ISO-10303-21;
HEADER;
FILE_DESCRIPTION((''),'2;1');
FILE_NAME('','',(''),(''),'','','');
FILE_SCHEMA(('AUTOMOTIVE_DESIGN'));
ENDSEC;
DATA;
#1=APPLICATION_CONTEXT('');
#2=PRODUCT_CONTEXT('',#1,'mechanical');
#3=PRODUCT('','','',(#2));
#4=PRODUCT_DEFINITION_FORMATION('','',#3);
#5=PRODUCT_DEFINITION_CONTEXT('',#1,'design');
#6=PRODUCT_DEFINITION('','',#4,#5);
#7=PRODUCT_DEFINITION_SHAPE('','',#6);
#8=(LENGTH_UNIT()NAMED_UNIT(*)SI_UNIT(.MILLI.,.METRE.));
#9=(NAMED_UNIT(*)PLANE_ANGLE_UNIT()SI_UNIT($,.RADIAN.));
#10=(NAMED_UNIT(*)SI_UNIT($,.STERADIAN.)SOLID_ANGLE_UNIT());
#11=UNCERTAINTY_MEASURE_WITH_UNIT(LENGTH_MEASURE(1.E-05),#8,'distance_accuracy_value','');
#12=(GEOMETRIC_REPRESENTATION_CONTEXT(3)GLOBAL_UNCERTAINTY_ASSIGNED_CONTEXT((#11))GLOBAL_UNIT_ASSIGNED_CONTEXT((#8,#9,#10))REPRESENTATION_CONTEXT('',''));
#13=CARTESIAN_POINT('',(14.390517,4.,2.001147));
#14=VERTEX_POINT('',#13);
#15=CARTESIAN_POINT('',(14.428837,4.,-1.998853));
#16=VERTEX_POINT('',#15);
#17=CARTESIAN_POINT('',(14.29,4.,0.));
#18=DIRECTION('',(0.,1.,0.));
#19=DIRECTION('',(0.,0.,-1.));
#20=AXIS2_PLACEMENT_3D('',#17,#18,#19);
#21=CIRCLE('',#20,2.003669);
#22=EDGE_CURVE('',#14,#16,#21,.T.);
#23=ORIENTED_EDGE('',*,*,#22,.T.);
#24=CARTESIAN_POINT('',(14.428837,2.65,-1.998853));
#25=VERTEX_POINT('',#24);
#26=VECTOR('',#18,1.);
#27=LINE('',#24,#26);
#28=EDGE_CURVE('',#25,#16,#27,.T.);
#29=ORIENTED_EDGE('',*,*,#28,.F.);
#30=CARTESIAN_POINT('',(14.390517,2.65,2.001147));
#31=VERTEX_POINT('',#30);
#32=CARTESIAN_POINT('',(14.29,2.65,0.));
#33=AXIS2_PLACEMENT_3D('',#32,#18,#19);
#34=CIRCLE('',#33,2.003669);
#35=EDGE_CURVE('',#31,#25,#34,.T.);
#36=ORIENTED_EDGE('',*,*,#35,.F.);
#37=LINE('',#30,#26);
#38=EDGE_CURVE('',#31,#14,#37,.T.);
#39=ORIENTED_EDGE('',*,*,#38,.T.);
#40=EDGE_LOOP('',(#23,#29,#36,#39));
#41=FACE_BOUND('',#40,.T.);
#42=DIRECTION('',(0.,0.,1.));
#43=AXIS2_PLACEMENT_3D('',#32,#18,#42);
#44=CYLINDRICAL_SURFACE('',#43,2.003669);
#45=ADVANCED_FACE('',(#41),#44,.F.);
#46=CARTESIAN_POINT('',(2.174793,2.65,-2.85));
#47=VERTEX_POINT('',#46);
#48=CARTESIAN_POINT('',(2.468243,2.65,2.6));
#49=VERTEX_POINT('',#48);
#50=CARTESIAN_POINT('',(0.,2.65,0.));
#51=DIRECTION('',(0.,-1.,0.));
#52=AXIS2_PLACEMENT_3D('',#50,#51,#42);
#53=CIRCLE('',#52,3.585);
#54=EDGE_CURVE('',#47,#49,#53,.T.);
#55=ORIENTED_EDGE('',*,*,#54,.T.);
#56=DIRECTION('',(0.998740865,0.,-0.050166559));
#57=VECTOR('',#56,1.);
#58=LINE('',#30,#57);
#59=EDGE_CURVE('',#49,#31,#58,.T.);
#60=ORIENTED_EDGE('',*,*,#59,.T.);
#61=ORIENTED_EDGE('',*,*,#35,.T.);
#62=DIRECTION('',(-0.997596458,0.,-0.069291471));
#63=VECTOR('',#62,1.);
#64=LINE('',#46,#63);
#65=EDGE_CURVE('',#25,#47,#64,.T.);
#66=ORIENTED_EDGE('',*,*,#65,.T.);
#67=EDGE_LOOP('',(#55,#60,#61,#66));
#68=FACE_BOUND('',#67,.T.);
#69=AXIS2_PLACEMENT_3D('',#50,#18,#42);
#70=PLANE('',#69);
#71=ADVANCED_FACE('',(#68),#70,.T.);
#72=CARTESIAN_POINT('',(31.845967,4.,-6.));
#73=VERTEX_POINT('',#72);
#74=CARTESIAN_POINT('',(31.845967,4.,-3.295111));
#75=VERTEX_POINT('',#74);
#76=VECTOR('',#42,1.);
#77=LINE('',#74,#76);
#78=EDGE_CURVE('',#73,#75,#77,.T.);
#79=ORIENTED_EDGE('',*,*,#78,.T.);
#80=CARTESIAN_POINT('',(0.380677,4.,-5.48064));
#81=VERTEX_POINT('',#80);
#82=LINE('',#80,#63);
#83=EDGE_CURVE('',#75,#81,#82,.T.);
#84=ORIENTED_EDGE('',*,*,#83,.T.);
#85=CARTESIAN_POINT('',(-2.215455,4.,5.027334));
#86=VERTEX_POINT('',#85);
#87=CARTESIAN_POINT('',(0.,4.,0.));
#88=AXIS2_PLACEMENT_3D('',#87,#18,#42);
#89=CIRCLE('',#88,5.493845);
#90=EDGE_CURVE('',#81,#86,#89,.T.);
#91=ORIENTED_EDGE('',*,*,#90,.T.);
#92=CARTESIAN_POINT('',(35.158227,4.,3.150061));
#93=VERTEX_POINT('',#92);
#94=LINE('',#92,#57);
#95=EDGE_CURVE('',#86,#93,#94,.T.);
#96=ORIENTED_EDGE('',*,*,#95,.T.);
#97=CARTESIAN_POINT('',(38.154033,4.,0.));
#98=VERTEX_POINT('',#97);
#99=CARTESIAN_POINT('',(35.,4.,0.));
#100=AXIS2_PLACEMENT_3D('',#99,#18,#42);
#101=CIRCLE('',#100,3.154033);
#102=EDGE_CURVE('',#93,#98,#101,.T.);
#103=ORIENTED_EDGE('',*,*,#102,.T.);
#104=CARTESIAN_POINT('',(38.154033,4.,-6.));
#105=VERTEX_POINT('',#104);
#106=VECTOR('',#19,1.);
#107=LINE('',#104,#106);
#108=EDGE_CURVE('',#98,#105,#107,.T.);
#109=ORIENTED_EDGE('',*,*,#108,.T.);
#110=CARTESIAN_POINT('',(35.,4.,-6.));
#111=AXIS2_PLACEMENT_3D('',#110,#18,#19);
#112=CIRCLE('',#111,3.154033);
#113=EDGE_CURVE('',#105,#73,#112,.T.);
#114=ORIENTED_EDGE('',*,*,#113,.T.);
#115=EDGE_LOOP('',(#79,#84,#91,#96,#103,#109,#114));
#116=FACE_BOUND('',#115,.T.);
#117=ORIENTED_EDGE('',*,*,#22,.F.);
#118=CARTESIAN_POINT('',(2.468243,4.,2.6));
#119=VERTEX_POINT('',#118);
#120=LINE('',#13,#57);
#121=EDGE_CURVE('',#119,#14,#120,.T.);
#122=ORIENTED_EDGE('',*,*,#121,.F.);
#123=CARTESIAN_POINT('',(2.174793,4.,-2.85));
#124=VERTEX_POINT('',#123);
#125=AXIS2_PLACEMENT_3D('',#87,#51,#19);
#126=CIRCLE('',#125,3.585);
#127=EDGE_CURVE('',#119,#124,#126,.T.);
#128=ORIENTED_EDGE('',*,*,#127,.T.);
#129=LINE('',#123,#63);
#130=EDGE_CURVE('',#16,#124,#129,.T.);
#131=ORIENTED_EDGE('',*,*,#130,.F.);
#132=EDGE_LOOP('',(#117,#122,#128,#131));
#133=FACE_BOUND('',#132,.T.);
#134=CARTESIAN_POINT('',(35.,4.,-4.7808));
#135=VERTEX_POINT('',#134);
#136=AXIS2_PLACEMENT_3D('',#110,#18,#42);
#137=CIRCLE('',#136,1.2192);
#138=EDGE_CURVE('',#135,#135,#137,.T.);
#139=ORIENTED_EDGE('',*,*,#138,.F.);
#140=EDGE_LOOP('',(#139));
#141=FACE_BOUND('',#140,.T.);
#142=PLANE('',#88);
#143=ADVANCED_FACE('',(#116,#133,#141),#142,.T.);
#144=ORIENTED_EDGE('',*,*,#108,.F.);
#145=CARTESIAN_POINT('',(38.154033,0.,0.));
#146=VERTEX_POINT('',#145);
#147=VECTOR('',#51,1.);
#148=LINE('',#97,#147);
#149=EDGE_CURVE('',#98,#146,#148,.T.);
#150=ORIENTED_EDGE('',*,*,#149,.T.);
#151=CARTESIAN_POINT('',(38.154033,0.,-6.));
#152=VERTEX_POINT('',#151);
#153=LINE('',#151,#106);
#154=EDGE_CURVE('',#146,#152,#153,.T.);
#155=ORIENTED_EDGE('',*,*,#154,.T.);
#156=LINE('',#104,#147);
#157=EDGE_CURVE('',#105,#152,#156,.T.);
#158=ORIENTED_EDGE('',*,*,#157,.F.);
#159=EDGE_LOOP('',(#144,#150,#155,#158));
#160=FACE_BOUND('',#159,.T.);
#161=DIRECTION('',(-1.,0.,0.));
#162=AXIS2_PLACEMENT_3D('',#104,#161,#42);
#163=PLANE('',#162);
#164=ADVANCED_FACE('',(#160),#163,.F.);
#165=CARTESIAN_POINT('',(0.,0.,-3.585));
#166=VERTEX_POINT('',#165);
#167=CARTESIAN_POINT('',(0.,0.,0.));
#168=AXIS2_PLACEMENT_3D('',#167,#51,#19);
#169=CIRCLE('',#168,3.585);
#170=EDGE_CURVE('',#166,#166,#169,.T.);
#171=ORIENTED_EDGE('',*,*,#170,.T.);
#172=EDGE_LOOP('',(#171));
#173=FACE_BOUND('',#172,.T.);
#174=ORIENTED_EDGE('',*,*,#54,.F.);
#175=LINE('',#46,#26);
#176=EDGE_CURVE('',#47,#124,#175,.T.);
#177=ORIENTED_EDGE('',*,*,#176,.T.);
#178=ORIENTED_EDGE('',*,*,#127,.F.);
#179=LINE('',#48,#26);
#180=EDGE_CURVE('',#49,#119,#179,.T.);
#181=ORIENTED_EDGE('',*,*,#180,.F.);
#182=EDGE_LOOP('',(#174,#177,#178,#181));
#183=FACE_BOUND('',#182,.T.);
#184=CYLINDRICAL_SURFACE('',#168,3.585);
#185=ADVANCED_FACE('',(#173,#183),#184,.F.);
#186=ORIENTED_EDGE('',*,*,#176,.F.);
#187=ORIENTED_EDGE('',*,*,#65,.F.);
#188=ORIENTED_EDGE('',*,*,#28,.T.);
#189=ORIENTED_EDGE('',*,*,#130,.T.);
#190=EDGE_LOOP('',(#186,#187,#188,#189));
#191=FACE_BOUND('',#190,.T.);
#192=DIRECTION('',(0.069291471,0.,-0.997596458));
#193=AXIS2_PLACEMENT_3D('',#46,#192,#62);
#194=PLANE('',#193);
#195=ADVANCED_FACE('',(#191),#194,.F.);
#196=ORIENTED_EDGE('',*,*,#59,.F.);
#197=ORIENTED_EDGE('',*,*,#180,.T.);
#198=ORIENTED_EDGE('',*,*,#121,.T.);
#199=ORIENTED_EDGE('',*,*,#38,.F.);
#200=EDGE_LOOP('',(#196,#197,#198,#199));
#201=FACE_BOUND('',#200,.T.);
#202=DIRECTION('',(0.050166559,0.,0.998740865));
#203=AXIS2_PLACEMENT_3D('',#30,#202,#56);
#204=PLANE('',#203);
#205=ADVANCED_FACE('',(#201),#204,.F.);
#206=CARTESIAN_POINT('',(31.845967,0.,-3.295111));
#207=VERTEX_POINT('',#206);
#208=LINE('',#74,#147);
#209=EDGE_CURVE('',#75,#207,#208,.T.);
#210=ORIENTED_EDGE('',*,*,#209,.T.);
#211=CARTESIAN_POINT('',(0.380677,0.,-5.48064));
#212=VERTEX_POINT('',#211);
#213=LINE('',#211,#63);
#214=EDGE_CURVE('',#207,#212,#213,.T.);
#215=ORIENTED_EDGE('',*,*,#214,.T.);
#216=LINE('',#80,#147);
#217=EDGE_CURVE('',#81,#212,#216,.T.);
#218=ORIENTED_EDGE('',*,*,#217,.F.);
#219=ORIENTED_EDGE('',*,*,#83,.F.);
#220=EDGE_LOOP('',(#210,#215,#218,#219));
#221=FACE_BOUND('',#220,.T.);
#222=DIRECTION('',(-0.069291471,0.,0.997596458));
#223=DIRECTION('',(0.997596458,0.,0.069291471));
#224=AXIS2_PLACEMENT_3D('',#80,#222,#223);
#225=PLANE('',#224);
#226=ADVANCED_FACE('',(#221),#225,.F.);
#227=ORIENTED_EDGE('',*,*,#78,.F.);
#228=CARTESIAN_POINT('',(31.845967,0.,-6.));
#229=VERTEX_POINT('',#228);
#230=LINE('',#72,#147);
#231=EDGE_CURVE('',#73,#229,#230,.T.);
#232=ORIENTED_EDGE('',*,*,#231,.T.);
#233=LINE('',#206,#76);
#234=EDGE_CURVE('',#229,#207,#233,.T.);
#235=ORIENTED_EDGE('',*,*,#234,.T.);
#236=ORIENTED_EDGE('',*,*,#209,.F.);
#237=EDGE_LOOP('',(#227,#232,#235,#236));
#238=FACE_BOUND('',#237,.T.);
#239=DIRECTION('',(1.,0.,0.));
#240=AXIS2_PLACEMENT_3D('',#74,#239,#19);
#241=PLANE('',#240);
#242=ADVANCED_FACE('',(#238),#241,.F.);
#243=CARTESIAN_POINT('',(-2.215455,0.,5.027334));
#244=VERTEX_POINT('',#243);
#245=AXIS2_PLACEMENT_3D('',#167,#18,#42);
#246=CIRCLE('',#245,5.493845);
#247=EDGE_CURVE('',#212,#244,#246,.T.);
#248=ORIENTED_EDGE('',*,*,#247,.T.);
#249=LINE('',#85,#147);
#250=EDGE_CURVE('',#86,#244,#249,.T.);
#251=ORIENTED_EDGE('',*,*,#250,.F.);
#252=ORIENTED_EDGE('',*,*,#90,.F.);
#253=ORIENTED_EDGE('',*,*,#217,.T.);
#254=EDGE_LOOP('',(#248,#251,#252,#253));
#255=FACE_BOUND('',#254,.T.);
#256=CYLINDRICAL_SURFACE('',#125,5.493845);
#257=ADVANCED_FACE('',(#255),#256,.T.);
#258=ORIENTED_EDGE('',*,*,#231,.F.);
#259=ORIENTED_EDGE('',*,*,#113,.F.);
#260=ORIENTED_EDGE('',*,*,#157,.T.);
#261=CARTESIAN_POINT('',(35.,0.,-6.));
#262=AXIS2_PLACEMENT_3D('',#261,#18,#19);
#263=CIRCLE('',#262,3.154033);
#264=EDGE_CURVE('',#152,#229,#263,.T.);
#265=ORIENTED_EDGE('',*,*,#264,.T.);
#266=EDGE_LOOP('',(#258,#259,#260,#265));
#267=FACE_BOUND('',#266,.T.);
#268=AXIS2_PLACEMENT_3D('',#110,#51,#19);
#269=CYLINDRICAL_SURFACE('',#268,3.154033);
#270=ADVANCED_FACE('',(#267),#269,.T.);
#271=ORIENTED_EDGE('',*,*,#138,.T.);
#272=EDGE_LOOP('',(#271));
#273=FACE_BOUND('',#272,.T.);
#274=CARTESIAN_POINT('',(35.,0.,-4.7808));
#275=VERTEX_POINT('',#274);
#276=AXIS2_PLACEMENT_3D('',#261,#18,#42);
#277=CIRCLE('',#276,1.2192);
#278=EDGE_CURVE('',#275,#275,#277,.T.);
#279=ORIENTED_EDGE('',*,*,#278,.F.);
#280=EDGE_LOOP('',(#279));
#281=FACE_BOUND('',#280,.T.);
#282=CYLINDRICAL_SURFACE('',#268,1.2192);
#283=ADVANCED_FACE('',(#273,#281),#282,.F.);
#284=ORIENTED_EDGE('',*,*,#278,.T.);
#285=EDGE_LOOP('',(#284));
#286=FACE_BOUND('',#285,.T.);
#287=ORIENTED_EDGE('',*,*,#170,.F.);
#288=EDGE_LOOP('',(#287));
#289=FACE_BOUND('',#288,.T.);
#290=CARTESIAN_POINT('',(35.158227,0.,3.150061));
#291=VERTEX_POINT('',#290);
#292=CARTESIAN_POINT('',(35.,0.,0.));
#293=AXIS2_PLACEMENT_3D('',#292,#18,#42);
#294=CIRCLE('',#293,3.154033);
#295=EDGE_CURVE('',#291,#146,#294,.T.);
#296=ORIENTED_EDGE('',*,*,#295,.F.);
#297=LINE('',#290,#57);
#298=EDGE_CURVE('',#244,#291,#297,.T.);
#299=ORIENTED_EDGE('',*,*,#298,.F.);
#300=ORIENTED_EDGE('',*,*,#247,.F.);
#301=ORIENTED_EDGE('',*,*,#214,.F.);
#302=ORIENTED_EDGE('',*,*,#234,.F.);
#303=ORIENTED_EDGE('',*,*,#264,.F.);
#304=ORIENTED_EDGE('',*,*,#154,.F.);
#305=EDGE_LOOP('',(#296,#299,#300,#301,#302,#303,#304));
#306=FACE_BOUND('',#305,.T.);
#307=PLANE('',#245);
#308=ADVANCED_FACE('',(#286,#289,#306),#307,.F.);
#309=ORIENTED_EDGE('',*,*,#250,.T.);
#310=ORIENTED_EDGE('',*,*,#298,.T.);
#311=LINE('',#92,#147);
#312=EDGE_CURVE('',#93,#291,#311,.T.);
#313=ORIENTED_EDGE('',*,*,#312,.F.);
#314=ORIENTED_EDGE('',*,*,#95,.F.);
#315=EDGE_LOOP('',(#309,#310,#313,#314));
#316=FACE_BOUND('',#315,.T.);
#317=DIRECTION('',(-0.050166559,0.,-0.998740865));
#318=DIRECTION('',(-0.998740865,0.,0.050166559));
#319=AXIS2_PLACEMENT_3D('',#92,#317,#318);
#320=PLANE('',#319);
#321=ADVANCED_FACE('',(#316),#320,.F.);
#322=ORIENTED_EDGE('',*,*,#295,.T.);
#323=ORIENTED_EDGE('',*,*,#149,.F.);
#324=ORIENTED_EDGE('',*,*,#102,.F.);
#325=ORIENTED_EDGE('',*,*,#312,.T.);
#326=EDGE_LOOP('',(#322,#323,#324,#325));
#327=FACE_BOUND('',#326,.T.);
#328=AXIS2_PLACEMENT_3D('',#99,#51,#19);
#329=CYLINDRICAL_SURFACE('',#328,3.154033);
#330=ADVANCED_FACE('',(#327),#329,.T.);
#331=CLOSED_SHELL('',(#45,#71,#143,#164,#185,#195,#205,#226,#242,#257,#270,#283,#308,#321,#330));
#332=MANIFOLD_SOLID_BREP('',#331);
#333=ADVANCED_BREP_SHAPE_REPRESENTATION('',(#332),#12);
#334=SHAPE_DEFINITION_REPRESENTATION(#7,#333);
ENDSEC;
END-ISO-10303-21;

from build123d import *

# Parameters (mm, degrees)
BOSS_EXTRUDE1_START    = -1.35
BOSS_EXTRUDE1_DEPTH    = 1.35
SKETCH4_R              = 1.2192
BOSS_EXTRUDE2_DEPTH    = 4
BODY_DELETE1_OUTLINE_R = 2.45
BODY_DELETE1_DEPTH     = 4


# Read off the part's stored shape, not the designer's step: Body-Delete1
with BuildPart() as part:
    # Sketch2 → Revolve1 (revolve)
    with BuildSketch(Plane.XY, mode=Mode.PRIVATE) as revolve1_sk:
        Polygon((2.45, 0), (2.45, 2.25), (1.2, 2.25), (1.2, 3), (2.45, 3), (2.45, 4), (3.585, 4), (3.585, 0), align=None)
    revolve(revolve1_sk.sketch.rotate(Axis((0, 0, 0), (0, 1, 0)), 90), axis=Axis((0, 0, 0), (0, 1, 0)))

    # Sketch3 → Boss-Extrude1 (add)
    with BuildSketch(Plane(origin=(0, 4, 0), x_dir=(1, 0, 0), z_dir=(0, 1, 0)).offset(BOSS_EXTRUDE1_START)):
        with BuildLine():
            Line((2.174793094, 2.85), (14.4288372, 1.998853492))
            ThreePointArc((14.4288372, 1.998853492), (16.293577458, -0.019194273), (14.390517199, -2.001146508))
            Line((14.390517199, -2.001146508), (2.468243302, -2.6))
            ThreePointArc((2.468243302, -2.6), (3.579814485, 0.1927518), (2.174793094, 2.85))
        make_face()
    extrude(amount=BOSS_EXTRUDE1_DEPTH)


with BuildPart() as body_2:
    # Sketch4 → Boss-Extrude2 (new body)
    with BuildSketch(Plane(origin=(0, 0, 0), x_dir=(1, 0, 0), z_dir=(0, 1, 0))):
        with BuildLine():
            Line((0.380676568, 5.480639828), (31.845967375, 3.295110532))
            Line((31.845967375, 3.295110532), (31.845967375, 6))
            ThreePointArc((31.845967375, 6), (35, 9.154032625), (38.154032625, 6))
            Line((38.154032625, 6), (38.154032625, 0))
            ThreePointArc((38.154032625, 0), (37.285495002, -2.173576407), (35.158226963, -3.150061274))
            Line((35.158226963, -3.150061274), (-2.215454853, -5.027334022))
            ThreePointArc((-2.215454853, -5.027334022), (-5.333477425, 1.317704871), (0.380676568, 5.480639828))
        make_face()
        with Locations(Location((35, 6, 0), (0, 0, 270))):
            Circle(SKETCH4_R, mode=Mode.SUBTRACT)
    extrude(amount=BOSS_EXTRUDE2_DEPTH)

    # Combine1: cut part
    add(part.part, mode=Mode.SUBTRACT)

    # Body-Delete1 outline → Body-Delete1 (cut)
    with BuildSketch(Plane(origin=(0, 0, 0), x_dir=(1, 0, 0), z_dir=(0, 1, 0))):
        Circle(BODY_DELETE1_OUTLINE_R)
    extrude(amount=BODY_DELETE1_DEPTH, mode=Mode.SUBTRACT)


solid = body_2.part
